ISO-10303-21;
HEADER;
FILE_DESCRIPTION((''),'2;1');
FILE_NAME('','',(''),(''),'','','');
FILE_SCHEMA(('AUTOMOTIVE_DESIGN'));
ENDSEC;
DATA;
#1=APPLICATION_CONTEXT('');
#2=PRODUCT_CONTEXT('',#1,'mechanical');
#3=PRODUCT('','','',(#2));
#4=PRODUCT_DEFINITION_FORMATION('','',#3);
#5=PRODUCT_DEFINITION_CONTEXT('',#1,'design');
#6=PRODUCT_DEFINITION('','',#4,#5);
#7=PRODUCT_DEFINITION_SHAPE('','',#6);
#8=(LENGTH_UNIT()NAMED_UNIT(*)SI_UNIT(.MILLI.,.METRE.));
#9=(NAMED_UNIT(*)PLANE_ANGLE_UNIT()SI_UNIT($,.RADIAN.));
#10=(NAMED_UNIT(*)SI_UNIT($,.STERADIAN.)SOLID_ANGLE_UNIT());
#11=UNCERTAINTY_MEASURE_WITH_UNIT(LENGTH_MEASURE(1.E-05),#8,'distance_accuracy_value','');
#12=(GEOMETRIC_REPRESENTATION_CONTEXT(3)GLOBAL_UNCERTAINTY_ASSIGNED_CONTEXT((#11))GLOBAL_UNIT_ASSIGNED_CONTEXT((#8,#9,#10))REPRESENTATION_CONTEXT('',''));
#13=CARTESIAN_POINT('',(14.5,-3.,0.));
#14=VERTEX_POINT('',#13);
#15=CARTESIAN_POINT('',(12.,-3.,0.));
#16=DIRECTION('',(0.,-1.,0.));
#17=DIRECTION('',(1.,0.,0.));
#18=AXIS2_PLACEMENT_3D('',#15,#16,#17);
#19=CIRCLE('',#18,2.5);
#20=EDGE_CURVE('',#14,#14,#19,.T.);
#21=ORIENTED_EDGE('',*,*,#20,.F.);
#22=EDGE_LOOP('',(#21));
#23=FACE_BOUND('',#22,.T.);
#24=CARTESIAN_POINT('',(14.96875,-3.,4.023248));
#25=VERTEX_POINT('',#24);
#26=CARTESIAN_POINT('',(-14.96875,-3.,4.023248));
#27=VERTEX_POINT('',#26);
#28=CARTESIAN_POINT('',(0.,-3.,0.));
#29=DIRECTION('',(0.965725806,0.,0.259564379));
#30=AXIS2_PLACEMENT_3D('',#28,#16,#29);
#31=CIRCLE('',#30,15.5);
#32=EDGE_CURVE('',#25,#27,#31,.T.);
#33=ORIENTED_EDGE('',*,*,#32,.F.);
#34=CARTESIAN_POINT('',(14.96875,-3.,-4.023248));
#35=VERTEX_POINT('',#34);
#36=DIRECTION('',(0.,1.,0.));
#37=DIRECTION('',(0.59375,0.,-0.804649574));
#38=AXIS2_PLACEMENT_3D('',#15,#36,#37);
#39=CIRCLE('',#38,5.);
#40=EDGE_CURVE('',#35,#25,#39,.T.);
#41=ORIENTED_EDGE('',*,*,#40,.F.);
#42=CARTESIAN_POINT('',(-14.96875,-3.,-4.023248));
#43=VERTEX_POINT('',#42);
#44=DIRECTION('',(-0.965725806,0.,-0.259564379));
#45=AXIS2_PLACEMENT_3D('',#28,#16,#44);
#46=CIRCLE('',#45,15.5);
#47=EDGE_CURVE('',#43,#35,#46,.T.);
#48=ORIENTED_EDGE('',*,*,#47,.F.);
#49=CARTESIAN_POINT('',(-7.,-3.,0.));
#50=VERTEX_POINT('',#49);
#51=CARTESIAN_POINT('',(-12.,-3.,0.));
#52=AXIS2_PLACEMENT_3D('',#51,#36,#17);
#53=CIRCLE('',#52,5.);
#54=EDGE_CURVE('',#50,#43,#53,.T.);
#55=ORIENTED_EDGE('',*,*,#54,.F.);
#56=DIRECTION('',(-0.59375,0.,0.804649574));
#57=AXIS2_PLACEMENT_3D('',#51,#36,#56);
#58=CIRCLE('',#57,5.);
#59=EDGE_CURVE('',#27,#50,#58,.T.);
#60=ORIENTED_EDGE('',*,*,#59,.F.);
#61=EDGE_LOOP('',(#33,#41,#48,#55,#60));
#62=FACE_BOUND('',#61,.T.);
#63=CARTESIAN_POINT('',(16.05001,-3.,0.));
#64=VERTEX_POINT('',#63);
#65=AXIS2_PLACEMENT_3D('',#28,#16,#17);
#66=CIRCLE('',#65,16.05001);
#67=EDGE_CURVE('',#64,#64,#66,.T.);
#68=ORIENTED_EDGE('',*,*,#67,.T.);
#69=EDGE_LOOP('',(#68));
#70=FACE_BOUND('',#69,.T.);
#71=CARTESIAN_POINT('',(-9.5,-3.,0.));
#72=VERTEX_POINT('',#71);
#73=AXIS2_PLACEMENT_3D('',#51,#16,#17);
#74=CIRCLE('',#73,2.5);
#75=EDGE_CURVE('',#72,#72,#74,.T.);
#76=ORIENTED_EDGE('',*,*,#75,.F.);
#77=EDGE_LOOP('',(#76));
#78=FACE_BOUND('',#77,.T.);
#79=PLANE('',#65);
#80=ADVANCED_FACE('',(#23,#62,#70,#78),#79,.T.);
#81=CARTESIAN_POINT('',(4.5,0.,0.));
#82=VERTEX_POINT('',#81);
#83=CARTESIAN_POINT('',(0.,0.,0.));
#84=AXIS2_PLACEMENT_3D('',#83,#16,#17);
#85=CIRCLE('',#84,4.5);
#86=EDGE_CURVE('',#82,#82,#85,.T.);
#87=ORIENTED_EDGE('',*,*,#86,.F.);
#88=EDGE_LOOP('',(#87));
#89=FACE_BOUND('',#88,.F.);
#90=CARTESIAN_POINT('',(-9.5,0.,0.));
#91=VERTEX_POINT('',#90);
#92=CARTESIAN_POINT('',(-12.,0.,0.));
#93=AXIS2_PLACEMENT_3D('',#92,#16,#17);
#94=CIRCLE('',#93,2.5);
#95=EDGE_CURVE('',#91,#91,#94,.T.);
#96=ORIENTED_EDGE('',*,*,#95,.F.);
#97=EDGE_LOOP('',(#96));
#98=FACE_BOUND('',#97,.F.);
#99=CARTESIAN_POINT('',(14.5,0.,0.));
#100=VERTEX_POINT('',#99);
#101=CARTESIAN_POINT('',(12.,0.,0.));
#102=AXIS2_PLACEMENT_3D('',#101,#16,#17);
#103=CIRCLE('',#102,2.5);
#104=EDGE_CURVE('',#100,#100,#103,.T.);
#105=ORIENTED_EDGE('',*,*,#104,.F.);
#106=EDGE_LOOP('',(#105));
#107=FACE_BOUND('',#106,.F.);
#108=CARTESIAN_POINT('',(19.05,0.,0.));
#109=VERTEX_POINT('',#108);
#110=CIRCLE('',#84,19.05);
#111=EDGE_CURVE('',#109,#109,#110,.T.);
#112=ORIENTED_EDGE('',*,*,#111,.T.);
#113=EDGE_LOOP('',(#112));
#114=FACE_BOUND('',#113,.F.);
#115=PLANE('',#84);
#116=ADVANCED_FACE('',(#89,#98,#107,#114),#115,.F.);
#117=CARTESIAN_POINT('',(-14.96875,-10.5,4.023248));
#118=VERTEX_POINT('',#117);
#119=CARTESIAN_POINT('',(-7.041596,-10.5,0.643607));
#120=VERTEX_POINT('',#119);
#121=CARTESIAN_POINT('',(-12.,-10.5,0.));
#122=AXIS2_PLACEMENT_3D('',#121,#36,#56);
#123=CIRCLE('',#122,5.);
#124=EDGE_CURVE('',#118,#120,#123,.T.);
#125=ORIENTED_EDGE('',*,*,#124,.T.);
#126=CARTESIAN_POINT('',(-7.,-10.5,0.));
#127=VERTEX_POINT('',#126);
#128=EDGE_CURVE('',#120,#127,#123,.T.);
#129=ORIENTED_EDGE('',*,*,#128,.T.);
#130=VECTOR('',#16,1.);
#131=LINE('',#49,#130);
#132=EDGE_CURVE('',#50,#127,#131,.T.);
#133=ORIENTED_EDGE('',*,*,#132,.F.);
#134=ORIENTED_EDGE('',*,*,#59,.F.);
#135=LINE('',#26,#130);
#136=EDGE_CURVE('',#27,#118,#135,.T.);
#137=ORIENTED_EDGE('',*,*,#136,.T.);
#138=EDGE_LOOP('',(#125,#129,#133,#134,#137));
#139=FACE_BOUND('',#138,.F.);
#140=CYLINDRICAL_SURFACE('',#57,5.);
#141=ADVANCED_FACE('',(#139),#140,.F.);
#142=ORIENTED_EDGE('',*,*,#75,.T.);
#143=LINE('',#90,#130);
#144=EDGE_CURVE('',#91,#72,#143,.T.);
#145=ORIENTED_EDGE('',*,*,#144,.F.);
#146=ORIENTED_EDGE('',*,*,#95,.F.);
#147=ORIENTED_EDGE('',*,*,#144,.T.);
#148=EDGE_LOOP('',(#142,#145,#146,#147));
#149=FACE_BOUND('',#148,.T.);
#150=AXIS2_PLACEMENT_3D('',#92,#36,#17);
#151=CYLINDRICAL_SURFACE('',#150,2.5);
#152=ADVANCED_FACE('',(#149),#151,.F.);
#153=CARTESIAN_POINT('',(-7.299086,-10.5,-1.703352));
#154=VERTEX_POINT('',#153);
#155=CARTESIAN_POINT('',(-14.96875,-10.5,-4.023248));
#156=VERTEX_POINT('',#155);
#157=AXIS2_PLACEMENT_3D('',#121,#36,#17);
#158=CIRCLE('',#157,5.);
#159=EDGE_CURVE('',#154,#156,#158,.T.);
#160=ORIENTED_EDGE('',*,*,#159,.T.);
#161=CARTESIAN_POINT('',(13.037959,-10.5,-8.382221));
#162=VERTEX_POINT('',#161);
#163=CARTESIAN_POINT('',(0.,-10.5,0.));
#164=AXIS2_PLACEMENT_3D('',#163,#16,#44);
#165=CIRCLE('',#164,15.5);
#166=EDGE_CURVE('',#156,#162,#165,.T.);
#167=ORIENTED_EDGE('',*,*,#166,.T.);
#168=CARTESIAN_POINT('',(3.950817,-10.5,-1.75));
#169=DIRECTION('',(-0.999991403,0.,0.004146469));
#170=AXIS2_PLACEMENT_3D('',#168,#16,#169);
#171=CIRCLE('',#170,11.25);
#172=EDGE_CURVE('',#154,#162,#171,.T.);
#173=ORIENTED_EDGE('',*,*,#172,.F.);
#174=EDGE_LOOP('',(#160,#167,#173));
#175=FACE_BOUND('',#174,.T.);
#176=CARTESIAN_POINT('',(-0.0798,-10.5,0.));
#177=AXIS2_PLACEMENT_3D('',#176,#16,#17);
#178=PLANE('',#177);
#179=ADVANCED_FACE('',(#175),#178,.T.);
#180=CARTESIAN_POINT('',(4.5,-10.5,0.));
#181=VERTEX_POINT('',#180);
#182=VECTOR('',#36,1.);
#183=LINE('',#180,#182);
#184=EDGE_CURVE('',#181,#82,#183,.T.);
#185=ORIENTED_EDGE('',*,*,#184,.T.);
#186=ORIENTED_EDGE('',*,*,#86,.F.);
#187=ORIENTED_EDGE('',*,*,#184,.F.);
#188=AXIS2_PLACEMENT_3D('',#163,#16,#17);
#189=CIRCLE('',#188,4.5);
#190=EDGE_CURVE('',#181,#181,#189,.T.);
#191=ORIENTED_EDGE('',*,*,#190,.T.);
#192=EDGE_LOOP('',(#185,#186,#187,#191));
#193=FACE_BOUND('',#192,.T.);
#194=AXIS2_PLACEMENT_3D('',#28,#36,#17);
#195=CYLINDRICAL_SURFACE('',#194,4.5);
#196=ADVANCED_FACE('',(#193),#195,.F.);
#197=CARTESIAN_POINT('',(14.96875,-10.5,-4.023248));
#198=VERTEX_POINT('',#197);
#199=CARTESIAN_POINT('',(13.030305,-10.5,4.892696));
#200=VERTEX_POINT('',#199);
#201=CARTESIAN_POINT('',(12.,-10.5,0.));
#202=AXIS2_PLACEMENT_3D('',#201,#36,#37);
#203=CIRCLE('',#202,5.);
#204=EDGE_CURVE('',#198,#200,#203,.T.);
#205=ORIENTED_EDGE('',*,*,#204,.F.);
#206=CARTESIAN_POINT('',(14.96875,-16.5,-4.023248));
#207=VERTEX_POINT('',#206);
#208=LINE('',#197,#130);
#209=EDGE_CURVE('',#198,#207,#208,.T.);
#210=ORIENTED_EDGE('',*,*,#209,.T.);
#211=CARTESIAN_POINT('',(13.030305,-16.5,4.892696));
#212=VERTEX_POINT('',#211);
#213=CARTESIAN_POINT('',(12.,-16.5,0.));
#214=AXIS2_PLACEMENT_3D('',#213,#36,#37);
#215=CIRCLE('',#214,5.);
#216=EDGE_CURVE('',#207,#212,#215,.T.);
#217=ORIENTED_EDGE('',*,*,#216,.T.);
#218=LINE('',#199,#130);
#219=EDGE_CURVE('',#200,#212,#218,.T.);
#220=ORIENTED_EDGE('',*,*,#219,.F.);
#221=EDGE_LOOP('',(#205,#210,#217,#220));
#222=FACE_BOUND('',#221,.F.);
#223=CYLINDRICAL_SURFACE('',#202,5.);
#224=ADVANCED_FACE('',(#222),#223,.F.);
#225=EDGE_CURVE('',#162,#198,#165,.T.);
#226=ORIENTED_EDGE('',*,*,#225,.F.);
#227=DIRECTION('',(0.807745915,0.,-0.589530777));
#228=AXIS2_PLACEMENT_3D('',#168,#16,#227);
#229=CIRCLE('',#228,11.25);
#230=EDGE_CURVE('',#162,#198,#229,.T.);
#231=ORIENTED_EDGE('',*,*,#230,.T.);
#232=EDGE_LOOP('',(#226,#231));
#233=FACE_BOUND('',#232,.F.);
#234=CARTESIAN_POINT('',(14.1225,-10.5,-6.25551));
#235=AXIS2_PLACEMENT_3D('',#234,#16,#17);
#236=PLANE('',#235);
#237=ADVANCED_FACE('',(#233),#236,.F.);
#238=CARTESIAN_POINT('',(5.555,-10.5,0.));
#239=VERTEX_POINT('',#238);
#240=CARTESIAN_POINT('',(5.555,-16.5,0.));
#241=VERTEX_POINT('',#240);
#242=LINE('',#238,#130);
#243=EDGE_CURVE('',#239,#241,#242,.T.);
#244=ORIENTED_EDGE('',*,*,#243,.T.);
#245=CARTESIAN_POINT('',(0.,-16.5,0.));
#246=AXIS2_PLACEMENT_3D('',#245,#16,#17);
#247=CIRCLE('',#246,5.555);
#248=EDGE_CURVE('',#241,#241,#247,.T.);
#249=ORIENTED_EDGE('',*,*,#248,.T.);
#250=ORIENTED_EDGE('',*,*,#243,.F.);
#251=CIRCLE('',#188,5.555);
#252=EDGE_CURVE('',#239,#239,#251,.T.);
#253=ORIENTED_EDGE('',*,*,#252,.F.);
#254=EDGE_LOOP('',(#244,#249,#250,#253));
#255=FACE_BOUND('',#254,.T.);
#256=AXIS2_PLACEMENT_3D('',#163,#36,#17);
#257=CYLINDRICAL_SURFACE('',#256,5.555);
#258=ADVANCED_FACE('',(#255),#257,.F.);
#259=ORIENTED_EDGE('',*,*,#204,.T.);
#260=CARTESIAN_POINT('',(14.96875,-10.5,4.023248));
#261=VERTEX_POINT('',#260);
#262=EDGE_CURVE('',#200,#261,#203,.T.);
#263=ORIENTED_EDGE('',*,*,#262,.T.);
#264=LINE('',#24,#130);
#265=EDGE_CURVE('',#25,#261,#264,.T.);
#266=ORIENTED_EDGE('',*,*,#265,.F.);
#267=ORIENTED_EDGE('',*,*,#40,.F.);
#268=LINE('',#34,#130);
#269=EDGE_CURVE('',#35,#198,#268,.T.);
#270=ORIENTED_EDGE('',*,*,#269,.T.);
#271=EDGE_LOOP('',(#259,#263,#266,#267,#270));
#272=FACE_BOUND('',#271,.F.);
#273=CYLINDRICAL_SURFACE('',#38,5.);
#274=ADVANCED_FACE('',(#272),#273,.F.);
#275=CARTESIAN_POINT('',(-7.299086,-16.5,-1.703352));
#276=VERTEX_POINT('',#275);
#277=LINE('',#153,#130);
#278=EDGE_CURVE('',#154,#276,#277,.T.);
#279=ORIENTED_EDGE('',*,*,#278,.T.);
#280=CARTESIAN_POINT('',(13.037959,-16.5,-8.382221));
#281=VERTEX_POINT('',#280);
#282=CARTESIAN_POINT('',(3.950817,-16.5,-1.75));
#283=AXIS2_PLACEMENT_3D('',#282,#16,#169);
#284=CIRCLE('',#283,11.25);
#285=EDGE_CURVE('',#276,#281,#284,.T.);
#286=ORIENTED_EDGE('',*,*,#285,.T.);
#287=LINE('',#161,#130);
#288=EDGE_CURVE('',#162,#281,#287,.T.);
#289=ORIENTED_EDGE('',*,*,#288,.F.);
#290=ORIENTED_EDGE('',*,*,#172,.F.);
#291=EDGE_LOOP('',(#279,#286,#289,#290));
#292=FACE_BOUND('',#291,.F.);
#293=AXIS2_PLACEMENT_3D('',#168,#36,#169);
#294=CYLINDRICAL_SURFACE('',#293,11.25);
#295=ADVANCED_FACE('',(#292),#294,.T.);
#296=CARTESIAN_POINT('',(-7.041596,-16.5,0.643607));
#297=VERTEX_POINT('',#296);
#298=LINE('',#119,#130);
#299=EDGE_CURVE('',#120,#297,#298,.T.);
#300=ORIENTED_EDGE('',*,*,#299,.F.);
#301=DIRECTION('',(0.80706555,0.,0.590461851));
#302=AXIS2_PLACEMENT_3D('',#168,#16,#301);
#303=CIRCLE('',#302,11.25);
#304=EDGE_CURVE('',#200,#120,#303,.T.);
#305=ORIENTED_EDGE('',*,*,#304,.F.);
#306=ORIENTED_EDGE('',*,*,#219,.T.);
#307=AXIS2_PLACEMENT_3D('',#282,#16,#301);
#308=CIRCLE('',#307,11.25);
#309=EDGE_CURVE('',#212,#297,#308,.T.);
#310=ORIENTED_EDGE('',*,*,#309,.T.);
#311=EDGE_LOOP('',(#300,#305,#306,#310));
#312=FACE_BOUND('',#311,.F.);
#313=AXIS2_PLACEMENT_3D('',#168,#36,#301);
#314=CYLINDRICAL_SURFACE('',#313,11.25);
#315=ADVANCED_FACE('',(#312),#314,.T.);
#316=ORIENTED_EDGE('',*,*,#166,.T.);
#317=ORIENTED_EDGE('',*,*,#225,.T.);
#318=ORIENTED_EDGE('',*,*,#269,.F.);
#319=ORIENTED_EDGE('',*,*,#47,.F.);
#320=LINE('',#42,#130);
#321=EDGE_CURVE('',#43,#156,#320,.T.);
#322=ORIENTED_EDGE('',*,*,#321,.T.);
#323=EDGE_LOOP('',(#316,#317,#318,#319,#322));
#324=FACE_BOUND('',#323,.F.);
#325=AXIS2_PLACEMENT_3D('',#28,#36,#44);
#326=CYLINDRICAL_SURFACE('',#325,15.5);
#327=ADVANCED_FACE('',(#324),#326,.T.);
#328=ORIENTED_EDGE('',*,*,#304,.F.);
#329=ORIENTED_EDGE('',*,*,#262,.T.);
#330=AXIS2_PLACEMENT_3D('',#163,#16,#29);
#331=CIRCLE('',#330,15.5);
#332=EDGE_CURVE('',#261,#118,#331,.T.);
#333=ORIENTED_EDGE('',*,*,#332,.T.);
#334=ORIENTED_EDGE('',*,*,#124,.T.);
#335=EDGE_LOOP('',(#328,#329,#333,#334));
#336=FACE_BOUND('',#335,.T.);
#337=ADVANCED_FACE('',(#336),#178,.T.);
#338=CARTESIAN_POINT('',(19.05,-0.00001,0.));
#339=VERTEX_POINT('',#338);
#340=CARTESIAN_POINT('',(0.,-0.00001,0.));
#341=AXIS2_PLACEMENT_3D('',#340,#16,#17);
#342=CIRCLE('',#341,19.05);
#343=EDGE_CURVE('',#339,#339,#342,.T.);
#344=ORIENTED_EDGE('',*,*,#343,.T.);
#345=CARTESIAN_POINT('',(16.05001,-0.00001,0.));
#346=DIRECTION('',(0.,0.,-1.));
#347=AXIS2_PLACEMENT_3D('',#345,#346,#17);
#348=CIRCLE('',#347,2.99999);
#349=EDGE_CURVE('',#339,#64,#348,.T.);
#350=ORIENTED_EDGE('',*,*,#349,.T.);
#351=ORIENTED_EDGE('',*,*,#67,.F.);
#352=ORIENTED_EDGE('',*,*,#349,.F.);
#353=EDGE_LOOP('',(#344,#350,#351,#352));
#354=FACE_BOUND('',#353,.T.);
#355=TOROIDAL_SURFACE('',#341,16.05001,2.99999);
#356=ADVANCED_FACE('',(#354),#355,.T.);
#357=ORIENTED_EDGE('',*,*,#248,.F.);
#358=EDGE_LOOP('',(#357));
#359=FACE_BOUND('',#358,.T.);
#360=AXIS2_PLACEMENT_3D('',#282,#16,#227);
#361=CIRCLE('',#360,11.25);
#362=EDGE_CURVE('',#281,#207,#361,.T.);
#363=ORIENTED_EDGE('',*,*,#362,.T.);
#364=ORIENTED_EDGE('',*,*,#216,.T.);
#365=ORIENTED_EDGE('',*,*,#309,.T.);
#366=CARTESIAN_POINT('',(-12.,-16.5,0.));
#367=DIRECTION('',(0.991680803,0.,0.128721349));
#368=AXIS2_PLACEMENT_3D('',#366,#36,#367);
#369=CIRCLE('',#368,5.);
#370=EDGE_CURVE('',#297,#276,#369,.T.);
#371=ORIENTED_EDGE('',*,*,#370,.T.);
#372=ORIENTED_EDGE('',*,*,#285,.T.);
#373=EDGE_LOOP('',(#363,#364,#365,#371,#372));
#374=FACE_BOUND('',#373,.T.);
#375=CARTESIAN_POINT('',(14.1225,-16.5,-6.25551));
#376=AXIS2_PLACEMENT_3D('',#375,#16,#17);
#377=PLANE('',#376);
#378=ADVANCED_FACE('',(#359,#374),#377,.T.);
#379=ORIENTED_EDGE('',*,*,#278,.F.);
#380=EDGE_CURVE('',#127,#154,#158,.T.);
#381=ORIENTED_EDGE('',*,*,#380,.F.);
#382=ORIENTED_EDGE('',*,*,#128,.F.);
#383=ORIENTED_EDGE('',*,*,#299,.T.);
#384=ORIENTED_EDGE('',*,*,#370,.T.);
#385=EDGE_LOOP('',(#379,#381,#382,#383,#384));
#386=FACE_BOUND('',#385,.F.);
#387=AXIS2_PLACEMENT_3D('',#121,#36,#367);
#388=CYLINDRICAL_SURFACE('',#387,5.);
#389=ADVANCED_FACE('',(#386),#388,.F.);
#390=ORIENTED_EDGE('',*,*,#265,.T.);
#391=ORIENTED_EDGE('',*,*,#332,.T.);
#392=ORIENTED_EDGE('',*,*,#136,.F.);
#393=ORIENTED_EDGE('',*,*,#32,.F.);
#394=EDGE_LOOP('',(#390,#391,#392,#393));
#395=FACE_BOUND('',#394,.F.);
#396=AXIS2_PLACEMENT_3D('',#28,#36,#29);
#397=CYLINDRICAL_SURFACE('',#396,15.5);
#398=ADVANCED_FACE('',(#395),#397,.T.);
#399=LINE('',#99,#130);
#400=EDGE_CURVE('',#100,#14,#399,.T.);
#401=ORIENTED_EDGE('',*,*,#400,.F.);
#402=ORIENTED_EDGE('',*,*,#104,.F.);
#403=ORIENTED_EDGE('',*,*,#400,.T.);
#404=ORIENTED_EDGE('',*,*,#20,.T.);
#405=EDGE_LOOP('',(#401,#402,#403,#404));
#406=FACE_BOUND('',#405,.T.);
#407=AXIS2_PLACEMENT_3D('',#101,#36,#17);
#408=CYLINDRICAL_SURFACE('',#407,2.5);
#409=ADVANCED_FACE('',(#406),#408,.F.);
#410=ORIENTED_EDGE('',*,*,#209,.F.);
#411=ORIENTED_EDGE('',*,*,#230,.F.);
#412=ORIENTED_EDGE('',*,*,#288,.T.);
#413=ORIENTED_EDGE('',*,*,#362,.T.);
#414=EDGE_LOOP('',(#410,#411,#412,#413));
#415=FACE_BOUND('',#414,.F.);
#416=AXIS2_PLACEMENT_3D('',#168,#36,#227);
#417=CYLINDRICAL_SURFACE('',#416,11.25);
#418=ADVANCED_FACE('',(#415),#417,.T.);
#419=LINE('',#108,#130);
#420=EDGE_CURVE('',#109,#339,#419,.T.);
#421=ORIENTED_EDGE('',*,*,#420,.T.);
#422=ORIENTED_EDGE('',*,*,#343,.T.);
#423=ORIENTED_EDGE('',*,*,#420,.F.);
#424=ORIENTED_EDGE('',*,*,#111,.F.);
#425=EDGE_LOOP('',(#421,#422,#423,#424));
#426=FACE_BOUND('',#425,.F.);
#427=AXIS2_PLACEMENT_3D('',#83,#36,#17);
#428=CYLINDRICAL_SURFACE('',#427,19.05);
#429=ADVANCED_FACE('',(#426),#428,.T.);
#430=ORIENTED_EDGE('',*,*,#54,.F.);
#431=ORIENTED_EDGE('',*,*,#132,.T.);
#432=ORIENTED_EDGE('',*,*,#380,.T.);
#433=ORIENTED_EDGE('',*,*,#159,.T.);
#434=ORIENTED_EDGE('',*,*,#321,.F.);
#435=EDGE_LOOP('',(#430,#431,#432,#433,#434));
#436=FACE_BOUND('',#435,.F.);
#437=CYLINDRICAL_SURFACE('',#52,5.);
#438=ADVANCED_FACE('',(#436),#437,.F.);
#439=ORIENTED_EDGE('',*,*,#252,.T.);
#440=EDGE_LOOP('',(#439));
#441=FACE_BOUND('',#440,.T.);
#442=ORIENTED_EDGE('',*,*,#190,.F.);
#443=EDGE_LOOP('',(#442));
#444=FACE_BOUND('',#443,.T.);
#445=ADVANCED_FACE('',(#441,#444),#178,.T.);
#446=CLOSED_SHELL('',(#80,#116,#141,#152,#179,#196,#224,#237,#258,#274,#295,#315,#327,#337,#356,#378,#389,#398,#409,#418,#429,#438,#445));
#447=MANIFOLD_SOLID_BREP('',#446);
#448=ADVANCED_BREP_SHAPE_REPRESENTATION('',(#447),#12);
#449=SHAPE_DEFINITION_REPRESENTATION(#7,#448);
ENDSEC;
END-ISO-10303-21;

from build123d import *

# Parameters (mm, degrees)
F0_R     = 19.05
F0_R_2   = 2.5
F0_R_3   = 4.5
F1_DEPTH = 3
F2_R     = 2.99999
F3_R     = 4.5
F4_DEPTH = 7.5
F5_R     = 5.555
F6_DEPTH = 6


# Not quite as in the source:
# - a fillet or chamfer is up to 0.001 mm smaller than in the source, because OpenCascade refuses the exact size


with BuildPart() as f1:
    # F0 (on Front) → F1 (new body)
    with BuildSketch(Plane.XZ):
        Circle(F0_R)
        with Locations((-12, 0)):
            Circle(F0_R_2, mode=Mode.SUBTRACT)
        Circle(F0_R_3, mode=Mode.SUBTRACT)
        with Locations((12, 0)):
            Circle(F0_R_2, mode=Mode.SUBTRACT)
    extrude(amount=F1_DEPTH)

    # F2 (radius 3 in the source; OpenCascade refuses exactly that, so slightly less here)
    f2_edges = [f1.edges().sort_by_distance(p)[0] for p in [
        (-19.05, -3, 0),
    ]]
    fillet(f2_edges, radius=F2_R)

    # F3 (on face) → F4 (join)
    with BuildSketch(Plane.XZ.offset(3)):
        with BuildLine():
            ThreePointArc((14.96875, -4.0232478717), (7, 0), (14.96875, 4.0232478717))
            ThreePointArc((14.96875, 4.0232478717), (0, 15.5), (-14.96875, 4.0232478717))
            ThreePointArc((-14.96875, 4.0232478717), (-9.7465304528, 4.4633927678), (-7, 0))
            ThreePointArc((-7, 0), (-9.7465304528, -4.4633927678), (-14.96875, -4.0232478717))
            ThreePointArc((-14.96875, -4.0232478717), (0, -15.5), (14.96875, -4.0232478717))
        make_face()
        Circle(F3_R, mode=Mode.SUBTRACT)
    extrude(amount=F4_DEPTH)

    # F5 (on face) → F6 (join)
    with BuildSketch(Plane.XZ.offset(10.5)):
        with BuildLine():
            ThreePointArc((13.0379586998, -8.3822212416), (14.2369080678, -6.3061863212), (14.96875, -4.0232478717))
            ThreePointArc((14.96875, -4.0232478717), (14.1719474758, -6.2774122648), (13.0379586998, -8.3822212416))
        make_face()
        with BuildLine():
            ThreePointArc((13.0379586998, -8.3822212416), (14.1719474758, -6.2774122648), (14.96875, -4.0232478717))
            ThreePointArc((14.96875, -4.0232478717), (7.1141405648, -1.0622511849), (13.0303045981, 4.8926958249))
            ThreePointArc((13.0303045981, 4.8926958249), (1.6209007027, 9.2560887381), (-7.0415959869, 0.6436067458))
            ThreePointArc((-7.0415959869, 0.6436067458), (-7.0298229821, -0.5452892911), (-7.2990861299, -1.7033522202))
            ThreePointArc((-7.2990861299, -1.7033522202), (0.4406594059, -12.4383718384), (13.0379586998, -8.3822212416))
        make_face()
        Circle(F5_R, mode=Mode.SUBTRACT)
    extrude(amount=F6_DEPTH)


solid = f1.part
